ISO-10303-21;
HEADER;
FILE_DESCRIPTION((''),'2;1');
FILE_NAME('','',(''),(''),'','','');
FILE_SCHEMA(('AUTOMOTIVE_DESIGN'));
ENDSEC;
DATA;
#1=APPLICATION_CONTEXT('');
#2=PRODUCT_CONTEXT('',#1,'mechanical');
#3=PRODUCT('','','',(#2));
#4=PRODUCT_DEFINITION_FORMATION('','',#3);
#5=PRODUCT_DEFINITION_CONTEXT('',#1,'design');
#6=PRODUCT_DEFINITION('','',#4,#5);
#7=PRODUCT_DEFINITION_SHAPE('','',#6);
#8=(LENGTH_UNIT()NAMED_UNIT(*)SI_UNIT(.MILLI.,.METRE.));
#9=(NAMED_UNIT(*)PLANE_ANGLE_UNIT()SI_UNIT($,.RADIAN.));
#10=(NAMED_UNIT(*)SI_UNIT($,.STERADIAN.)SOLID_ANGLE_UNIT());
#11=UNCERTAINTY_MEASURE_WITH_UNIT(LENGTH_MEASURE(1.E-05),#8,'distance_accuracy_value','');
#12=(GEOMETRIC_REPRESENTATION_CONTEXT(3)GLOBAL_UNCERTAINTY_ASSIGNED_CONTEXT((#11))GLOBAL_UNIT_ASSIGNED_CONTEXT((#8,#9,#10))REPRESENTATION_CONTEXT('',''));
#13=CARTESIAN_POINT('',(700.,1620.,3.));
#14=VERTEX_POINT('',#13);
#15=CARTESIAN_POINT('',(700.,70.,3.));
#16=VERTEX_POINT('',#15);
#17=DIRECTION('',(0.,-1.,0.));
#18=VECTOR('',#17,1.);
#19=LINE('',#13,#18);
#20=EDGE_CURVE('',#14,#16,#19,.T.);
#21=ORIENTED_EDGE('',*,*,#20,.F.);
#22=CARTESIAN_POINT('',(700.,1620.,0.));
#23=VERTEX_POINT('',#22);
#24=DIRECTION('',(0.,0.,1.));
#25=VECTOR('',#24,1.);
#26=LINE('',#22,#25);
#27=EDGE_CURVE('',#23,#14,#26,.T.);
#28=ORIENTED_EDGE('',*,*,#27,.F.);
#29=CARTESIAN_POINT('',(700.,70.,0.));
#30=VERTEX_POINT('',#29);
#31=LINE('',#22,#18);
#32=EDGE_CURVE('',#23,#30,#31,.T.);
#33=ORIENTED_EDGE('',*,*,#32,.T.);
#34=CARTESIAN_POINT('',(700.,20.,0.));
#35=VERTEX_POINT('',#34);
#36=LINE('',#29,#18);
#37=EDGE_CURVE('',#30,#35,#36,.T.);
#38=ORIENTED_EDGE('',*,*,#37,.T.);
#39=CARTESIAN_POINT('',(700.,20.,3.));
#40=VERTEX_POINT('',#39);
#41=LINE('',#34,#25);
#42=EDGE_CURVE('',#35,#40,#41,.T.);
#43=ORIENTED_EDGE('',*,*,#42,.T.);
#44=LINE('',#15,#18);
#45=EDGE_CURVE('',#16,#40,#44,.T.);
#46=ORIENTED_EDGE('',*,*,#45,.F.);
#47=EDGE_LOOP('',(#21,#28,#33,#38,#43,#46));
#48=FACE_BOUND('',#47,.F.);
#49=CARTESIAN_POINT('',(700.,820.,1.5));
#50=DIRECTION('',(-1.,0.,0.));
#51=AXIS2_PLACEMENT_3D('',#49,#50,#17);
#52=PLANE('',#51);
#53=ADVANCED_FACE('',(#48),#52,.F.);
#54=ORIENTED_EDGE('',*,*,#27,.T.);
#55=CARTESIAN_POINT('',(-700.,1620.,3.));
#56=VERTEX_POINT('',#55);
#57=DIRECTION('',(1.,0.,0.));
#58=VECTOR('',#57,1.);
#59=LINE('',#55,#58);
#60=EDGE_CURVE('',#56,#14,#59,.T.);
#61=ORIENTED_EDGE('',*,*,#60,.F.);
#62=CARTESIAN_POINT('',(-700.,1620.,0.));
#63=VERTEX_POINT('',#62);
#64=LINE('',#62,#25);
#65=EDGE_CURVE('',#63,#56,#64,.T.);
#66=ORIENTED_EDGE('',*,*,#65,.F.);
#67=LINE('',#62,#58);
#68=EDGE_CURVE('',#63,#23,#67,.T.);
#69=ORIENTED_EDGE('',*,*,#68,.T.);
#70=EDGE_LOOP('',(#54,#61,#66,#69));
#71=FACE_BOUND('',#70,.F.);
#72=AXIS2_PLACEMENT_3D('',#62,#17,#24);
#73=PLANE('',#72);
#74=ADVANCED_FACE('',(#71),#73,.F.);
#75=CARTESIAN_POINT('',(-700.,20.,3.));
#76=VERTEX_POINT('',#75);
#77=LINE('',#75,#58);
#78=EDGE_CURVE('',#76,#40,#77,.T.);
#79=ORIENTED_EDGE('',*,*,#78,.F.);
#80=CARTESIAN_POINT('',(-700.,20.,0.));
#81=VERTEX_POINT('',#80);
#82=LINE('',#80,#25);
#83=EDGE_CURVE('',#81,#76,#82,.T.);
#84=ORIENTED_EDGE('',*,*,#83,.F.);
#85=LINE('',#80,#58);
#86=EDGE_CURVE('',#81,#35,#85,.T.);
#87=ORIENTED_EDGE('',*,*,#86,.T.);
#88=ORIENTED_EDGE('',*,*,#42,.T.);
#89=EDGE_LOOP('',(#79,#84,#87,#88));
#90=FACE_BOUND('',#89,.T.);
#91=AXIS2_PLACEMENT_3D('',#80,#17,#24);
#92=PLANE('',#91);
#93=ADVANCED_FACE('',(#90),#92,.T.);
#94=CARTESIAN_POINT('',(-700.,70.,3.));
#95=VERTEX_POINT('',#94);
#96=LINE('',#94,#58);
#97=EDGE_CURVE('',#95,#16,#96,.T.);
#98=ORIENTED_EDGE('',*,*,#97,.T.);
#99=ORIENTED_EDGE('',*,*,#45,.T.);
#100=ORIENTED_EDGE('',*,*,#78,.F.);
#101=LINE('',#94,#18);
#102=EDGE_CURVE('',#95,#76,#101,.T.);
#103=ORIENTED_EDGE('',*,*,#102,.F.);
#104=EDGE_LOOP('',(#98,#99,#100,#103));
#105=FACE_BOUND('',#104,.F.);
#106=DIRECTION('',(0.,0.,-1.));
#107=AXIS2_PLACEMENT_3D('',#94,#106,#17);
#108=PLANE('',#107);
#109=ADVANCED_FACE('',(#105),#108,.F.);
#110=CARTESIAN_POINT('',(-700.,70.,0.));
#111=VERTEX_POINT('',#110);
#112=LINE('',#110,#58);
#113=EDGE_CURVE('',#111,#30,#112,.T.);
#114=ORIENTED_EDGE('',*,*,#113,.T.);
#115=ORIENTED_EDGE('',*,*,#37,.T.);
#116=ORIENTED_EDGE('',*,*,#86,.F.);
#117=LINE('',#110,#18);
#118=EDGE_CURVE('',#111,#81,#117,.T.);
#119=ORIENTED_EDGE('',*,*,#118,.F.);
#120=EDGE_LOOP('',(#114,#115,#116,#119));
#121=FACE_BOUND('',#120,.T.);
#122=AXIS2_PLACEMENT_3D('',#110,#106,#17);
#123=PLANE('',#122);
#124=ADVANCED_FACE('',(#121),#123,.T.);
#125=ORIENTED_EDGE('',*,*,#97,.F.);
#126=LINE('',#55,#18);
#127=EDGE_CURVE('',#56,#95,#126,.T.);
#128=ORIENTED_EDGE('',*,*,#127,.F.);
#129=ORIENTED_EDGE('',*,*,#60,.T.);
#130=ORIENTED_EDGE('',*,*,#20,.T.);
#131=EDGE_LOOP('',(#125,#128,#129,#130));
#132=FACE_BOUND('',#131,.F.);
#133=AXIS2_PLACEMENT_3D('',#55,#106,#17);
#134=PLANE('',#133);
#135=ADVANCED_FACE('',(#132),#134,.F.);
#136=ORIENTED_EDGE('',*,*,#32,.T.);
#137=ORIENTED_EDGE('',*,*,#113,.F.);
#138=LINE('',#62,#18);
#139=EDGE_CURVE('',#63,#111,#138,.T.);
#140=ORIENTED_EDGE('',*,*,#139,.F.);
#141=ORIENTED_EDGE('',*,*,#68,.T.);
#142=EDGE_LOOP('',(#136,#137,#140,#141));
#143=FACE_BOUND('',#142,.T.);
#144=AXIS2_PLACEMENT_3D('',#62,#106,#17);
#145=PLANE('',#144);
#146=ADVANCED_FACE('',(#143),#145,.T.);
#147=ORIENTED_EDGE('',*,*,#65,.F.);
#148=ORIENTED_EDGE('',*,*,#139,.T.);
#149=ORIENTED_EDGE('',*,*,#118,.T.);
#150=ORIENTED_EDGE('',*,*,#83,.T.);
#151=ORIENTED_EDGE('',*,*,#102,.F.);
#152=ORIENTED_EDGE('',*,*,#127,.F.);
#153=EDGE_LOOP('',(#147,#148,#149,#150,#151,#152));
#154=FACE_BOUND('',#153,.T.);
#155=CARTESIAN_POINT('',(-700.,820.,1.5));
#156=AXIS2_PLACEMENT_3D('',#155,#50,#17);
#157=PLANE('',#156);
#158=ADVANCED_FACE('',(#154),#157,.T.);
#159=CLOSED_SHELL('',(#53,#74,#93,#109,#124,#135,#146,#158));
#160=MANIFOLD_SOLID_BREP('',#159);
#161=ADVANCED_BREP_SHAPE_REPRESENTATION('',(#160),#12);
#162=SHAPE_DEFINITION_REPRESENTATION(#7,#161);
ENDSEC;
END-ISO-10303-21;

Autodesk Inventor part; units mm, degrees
ref_plane "YZ Plane" through (0, 0, 0) normal (1, 0, 0) x (0, 1, 0)
ref_plane "XZ Plane" through (0, 0, 0) normal (0, 1, 0) x (-1, 0, 0)
ref_plane "XY Plane" through (0, 0, 0) normal (0, 0, 1) x (1, 0, 0)
sketch "Sketch1" plane through (0, 0, 0) normal (1, 0, 0) x (0, 1, 0)
  line L0 (1620, 0) -> (70, 0)
  line L1 (70, 0) -> (20, 0)
  line L2 (20, 0) -> (0, 0)
  dimension "d0" = 180
  dimension "d1" = 50
  dimension "d2" = 1620
  dimension "d3" = 20
contour flange "Contour Flange1" sketch "Sketch1" thickness 3 bend radius 3 width 1400 along (1, 0, 0) mid plane yes both sides no wall seen from (0, 845, 0) lies toward (0, 0, 1) curves L0 L1
bend "Bend1"
corner "Corner1"
sketch "Sketch2" plane through (-697.8787, 1620, 0.8787) normal (-0.7071068, 0, 0.7071068) x (0, -1, 0)
  line L0 (1600, 0) -> (0, 0)
  line L1 (0, 0) -> (0, -50)
  line L2 (0, -50) -> (1600, -50)
  line L3 (1600, -50) -> (1600, 0)
equation "\"d4\" = Thickness"
equation "\"d5\" = BendReliefWidth"
equation "\"d6\" = BendReliefDepth"
equation "\"d7\" = MinimumRemnant"
equation "\"d8\" = TransitionRadius"
equation "\"d10\" = BendRadius"
equation "\"d12\" = CornerReliefSize"
equation "\"d13\" = GapSize"
equation "\"d14\" = JacobiRadiusSize"
equation "\"BendRadius\" = Thickness"
equation "\"BendReliefWidth\" = Thickness"
equation "\"BendReliefDepth\" = 0.5 * Thickness"
equation "\"CornerReliefSize\" = 4 * Thickness"
equation "\"MinimumRemnant\" = 2 * Thickness"
equation "\"TransitionRadius\" = BendRadius"
equation "\"JacobiRadiusSize\" = BendRadius"
equation "\"GapSize\" = Thickness"
equation "\"Thickness\" = 3"
properties part number "GBK-RK-0014 short wall 4"
